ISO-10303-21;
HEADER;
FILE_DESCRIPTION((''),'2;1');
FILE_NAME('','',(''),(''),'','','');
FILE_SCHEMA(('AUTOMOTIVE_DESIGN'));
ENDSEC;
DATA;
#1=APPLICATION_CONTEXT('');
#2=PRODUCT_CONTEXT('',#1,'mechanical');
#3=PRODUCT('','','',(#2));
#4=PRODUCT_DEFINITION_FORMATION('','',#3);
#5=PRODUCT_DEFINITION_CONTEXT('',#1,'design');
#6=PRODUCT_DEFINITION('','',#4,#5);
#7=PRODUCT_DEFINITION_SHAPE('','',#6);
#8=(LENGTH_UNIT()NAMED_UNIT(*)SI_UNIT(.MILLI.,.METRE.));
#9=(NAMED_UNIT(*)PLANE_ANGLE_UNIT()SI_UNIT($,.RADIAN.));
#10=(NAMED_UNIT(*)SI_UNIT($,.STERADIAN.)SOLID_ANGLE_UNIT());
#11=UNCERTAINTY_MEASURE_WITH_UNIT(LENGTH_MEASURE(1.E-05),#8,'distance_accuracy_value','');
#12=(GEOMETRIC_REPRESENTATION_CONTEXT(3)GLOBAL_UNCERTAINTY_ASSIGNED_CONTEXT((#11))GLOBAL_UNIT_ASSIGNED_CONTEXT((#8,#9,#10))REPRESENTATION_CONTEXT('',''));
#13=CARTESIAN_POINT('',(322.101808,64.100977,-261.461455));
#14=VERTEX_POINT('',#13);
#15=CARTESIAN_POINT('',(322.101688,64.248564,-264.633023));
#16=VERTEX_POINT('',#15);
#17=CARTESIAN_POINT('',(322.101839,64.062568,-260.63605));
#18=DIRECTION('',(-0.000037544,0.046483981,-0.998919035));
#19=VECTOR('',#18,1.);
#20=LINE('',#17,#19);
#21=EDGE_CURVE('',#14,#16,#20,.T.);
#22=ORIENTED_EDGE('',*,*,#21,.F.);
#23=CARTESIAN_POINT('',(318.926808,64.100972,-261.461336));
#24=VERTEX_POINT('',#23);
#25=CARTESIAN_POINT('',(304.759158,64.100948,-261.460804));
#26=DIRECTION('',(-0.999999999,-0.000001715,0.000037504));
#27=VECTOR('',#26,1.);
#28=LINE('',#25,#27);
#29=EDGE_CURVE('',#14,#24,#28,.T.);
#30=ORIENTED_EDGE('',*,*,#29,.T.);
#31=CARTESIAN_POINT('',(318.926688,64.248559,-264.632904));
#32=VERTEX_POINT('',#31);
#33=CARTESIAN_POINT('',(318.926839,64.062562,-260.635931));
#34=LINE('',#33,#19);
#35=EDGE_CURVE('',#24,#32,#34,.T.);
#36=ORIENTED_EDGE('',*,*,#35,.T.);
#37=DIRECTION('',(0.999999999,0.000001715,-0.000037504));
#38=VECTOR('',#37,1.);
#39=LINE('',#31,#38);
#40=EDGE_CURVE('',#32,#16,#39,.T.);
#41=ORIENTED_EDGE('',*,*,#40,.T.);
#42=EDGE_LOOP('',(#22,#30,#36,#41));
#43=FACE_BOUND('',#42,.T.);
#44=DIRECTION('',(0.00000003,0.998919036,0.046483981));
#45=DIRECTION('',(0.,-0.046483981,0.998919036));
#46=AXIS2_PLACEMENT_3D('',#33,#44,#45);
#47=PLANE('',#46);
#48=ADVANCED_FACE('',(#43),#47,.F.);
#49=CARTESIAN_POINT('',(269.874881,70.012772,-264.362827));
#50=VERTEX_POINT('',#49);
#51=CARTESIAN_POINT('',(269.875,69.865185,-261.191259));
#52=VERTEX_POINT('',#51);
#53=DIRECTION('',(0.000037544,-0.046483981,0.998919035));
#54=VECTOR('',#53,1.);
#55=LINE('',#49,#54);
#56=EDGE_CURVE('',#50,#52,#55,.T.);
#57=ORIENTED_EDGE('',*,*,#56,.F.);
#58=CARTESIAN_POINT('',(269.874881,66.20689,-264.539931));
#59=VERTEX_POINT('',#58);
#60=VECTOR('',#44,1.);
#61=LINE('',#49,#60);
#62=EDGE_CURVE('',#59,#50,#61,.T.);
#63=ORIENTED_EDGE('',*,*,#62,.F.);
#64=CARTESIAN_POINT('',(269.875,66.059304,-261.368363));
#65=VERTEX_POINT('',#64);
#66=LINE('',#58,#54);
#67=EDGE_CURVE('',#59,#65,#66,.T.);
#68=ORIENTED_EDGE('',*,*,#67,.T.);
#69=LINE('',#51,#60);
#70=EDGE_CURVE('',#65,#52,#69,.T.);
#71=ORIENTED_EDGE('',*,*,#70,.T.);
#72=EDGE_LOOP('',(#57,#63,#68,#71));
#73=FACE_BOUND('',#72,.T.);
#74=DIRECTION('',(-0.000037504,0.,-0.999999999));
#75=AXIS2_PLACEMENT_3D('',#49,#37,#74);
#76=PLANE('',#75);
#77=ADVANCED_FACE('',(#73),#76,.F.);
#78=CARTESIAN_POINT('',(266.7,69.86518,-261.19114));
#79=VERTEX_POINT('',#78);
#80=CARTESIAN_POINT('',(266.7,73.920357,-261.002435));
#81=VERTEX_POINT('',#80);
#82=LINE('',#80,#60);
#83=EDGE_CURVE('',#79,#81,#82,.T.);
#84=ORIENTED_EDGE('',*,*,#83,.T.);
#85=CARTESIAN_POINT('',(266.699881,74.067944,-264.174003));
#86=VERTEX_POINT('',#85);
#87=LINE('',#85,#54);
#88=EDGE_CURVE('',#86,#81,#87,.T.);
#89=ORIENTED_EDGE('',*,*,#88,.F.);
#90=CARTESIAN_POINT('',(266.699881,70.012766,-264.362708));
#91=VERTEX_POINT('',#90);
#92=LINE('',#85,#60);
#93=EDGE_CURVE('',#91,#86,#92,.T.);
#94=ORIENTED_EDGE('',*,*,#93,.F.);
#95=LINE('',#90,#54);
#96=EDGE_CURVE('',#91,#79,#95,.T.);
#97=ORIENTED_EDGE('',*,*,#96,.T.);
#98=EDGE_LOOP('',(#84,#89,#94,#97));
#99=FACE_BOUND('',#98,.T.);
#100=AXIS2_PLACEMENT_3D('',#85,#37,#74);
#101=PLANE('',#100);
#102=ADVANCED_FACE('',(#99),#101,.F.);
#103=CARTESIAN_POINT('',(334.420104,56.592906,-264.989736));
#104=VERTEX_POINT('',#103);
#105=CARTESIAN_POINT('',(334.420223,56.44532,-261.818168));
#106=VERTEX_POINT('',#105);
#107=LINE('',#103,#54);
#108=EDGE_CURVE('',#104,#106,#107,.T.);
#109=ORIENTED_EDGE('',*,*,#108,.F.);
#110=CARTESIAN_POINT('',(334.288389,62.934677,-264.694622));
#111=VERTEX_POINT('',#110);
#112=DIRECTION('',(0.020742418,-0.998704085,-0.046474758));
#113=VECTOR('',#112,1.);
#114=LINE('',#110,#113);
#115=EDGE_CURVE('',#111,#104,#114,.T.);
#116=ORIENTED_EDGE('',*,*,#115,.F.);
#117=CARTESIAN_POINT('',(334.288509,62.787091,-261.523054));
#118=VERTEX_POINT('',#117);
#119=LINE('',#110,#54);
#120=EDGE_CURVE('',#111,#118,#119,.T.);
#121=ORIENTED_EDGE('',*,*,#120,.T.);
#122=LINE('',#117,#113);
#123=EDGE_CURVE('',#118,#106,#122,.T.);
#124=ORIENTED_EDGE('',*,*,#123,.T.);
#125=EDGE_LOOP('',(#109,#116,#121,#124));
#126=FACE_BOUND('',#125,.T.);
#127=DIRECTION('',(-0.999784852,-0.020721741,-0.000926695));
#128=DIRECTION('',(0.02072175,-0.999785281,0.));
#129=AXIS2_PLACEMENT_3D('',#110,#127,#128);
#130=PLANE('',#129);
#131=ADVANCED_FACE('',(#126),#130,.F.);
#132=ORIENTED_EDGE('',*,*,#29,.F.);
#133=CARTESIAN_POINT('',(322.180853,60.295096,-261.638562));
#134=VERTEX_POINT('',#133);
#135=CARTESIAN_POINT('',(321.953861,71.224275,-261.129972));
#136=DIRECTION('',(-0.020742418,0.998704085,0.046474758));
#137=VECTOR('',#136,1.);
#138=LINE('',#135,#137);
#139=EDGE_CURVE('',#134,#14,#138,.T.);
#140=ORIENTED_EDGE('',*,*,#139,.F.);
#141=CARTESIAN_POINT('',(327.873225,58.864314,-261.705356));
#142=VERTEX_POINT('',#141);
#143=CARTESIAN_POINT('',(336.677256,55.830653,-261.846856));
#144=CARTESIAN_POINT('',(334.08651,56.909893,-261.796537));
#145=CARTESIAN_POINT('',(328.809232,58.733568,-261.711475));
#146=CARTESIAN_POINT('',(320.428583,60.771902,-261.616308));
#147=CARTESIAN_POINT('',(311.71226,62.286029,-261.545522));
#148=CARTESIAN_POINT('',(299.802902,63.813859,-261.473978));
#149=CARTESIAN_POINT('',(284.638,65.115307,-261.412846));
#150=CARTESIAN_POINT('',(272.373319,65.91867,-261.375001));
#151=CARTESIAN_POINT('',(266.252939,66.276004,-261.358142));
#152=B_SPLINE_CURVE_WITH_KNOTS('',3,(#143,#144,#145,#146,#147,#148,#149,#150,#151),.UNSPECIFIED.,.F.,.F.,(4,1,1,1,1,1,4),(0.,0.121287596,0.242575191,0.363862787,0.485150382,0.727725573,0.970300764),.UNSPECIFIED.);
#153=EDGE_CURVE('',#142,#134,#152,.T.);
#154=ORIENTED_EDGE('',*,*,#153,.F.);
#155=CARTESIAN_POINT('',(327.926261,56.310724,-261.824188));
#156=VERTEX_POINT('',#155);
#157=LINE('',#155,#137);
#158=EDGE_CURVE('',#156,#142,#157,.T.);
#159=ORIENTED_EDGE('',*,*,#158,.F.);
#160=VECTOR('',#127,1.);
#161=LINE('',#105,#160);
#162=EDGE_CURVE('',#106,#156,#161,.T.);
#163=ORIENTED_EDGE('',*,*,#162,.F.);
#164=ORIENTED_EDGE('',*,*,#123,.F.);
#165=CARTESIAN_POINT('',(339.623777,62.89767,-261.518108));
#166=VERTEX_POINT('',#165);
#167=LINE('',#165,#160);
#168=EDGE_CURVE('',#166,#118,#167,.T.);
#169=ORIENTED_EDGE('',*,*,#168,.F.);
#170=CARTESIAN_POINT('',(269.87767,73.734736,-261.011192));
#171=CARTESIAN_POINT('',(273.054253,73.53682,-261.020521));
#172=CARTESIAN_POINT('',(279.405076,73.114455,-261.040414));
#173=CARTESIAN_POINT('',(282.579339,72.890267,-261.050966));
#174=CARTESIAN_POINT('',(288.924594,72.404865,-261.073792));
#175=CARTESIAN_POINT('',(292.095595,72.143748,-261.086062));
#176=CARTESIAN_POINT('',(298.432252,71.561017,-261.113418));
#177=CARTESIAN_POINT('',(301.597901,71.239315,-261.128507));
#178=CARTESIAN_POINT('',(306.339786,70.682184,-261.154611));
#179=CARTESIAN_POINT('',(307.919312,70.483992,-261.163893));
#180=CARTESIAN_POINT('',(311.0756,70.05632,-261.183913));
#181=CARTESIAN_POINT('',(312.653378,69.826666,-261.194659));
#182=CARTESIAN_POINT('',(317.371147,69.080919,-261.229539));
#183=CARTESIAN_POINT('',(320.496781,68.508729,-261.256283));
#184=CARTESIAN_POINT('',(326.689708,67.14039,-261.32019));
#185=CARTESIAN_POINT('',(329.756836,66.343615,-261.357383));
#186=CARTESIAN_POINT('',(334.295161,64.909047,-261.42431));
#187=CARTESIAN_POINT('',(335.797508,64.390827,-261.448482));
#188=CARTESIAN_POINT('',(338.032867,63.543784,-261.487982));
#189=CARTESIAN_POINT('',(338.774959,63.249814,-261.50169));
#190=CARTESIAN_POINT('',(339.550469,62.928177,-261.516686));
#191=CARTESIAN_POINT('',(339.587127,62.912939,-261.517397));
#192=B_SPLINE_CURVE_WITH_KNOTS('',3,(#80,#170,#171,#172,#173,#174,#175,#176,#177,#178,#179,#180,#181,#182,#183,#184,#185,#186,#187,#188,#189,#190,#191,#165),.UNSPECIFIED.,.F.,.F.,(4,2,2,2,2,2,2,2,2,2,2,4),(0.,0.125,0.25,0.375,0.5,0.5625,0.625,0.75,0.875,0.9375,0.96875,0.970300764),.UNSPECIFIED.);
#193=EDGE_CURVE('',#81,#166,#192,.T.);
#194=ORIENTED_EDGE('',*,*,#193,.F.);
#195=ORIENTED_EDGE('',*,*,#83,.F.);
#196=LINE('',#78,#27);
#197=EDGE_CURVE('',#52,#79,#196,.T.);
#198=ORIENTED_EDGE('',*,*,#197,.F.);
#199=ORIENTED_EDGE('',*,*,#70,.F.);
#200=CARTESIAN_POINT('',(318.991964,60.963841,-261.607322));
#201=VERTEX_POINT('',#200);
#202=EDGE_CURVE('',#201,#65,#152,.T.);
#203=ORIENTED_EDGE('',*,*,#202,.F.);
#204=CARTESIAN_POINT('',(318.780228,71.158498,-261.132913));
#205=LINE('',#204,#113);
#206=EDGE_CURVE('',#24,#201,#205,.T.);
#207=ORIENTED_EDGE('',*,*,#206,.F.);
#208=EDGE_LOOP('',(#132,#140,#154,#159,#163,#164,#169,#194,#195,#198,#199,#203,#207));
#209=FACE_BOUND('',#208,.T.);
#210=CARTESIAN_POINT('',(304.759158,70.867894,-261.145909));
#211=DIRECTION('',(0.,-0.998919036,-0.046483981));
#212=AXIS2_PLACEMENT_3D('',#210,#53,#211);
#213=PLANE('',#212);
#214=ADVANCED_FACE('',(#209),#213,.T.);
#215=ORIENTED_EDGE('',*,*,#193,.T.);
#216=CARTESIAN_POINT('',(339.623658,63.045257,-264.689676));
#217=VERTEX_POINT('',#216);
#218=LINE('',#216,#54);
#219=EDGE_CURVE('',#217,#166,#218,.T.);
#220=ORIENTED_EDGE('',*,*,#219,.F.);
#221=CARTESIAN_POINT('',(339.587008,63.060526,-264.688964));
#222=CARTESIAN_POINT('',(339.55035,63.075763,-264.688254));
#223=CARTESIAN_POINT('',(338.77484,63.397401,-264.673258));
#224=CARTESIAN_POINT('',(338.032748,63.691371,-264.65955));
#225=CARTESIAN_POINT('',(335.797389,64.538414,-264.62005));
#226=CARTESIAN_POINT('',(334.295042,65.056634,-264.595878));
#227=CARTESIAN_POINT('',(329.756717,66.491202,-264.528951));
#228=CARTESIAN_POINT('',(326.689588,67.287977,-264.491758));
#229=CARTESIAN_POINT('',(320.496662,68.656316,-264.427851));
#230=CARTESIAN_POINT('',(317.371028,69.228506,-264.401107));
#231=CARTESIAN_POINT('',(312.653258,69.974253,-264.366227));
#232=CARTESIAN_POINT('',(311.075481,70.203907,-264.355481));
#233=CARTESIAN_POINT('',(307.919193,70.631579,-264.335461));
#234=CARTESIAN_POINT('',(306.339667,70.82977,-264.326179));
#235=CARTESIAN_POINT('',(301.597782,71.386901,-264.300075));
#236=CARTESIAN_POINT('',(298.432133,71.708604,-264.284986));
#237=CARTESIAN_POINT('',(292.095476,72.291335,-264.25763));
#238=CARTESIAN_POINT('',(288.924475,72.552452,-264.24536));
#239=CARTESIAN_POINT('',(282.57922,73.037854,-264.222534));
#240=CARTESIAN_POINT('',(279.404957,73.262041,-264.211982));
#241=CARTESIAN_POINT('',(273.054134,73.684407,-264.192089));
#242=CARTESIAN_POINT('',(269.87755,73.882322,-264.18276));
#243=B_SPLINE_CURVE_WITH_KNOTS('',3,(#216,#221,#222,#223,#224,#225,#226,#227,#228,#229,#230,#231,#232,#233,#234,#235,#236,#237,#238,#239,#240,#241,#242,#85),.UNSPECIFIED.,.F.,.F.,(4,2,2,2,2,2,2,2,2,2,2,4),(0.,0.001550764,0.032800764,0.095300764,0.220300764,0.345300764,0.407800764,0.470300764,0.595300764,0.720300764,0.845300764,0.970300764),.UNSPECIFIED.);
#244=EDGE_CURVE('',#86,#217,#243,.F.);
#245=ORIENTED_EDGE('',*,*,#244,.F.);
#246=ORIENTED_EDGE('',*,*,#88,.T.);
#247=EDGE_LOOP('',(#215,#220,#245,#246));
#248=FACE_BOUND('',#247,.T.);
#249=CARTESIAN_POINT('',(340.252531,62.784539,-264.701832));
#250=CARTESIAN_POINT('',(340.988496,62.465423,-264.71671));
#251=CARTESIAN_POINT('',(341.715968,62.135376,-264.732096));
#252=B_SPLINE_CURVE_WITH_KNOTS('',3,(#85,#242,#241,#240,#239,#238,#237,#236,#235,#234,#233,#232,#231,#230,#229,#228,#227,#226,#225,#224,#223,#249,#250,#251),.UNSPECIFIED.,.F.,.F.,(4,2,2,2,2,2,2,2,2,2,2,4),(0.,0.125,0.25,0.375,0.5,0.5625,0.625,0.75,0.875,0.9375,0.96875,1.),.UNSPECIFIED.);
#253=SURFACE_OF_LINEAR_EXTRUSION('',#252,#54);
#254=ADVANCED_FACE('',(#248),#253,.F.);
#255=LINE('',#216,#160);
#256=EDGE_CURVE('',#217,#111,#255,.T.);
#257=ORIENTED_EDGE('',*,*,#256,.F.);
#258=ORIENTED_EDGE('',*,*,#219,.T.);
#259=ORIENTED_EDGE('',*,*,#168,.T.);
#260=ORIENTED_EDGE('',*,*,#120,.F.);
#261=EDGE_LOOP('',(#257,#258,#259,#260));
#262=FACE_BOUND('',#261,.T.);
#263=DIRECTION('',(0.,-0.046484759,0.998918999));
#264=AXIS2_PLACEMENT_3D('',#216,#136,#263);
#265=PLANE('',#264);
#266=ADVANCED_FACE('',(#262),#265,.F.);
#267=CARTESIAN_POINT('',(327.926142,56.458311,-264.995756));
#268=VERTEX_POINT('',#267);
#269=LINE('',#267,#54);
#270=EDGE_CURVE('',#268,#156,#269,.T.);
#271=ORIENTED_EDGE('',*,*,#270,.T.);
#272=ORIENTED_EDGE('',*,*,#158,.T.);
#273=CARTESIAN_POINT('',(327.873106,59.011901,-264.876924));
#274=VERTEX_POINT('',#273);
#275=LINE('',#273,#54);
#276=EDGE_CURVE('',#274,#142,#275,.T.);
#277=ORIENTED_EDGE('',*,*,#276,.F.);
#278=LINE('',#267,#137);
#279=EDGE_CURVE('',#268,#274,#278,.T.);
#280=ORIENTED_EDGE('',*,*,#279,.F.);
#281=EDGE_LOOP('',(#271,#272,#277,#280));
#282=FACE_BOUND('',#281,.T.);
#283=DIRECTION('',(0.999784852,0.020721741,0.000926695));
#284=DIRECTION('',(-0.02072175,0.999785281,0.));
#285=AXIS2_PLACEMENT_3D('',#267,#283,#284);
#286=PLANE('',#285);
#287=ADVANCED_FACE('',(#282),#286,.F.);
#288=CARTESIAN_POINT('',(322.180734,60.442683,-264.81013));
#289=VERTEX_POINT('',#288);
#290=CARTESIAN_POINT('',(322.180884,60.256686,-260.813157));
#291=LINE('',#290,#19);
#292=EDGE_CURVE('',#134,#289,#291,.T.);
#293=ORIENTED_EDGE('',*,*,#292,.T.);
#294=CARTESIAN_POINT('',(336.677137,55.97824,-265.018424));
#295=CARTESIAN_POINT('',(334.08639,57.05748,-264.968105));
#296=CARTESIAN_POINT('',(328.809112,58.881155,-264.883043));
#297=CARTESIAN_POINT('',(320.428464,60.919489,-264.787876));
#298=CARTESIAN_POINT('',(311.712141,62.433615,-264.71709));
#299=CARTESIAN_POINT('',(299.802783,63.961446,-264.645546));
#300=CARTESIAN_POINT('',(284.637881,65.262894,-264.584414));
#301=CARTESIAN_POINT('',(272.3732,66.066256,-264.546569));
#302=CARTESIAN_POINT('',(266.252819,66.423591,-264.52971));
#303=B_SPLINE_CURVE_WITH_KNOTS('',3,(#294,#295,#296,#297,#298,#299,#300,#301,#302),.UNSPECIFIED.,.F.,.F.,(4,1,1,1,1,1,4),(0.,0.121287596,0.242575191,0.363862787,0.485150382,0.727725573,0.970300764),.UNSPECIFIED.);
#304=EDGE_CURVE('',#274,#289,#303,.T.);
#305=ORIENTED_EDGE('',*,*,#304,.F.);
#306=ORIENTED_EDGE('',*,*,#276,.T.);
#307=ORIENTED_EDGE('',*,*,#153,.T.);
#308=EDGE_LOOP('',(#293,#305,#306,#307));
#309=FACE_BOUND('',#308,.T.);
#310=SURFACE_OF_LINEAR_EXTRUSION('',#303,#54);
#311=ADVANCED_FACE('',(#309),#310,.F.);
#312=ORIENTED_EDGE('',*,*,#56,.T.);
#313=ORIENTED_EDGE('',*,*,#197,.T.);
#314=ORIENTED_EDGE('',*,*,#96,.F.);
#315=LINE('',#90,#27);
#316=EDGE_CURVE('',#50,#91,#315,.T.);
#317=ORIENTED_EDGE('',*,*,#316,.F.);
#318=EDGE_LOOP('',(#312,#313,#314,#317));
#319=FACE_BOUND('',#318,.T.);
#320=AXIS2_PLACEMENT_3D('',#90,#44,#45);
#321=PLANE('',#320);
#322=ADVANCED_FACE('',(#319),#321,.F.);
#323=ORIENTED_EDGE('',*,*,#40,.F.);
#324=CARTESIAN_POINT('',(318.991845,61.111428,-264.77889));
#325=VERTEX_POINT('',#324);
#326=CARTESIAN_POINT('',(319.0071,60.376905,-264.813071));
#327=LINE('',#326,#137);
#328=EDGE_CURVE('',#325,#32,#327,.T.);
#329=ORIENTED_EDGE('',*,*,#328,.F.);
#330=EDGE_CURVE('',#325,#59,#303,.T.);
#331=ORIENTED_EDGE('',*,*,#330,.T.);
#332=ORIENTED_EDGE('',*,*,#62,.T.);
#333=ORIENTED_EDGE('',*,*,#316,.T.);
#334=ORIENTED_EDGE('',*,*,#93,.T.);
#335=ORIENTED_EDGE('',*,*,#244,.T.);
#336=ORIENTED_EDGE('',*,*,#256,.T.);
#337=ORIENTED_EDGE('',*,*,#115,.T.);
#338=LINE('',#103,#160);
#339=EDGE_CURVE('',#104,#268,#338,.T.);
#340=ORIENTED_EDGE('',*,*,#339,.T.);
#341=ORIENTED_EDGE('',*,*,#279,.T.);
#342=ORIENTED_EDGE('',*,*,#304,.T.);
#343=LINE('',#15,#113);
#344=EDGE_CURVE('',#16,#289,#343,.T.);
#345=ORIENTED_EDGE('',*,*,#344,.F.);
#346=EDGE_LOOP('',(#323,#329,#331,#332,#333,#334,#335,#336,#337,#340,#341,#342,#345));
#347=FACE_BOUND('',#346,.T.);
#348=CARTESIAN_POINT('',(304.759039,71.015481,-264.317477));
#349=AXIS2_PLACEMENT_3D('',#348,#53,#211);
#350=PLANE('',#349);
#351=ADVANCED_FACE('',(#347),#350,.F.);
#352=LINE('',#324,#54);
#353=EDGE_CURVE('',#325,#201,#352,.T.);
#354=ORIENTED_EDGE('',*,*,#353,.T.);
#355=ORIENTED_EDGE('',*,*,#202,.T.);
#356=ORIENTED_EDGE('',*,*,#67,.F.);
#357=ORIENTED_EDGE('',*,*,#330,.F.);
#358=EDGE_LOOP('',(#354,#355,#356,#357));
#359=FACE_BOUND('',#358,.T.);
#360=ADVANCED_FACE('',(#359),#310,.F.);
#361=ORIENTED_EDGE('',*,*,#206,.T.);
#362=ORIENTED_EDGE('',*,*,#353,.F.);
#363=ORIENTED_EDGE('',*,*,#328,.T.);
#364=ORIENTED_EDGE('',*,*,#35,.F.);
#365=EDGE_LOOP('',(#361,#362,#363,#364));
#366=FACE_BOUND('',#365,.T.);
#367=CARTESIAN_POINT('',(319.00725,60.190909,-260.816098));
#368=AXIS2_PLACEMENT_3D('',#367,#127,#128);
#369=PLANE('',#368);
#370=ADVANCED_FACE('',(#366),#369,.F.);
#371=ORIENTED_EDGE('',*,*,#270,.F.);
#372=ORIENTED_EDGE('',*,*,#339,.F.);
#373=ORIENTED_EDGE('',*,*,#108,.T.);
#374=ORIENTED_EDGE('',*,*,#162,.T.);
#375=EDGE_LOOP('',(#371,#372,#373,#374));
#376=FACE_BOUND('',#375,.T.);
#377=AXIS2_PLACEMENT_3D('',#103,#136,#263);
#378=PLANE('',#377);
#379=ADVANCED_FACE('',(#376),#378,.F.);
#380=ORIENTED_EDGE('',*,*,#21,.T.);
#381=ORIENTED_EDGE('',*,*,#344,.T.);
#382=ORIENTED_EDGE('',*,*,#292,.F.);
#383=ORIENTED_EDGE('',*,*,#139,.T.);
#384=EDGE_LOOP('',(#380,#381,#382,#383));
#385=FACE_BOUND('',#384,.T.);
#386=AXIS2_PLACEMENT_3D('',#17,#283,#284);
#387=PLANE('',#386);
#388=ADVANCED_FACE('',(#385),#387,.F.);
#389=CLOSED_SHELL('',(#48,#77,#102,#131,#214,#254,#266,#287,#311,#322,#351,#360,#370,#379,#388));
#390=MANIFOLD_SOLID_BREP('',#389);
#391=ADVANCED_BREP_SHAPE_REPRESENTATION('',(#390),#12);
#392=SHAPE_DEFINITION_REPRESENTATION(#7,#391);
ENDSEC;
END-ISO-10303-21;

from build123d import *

# Parameters (mm, degrees)
BOSS_EXTRUDE1_DEPTH = 3.175
CUT_EXTRUDE1_DEPTH  = 346.234988545


# Read off the part's stored shape, not the designer's step: Boss-Extrude1
with BuildPart() as part:
    # Boss-Extrude1 outline → Boss-Extrude1 (new body)
    with BuildSketch(Plane(origin=(-0.009916987, 12.278576214, -263.860866814), x_dir=(-0.9999999992952415, -1.714878770133331e-06, 3.750435023264405e-05), z_dir=(-3.75435237541071e-05, 0.046483980928917014, -0.998919034810872))):
        with BuildLine():
            Line((-266.709915303, 57.648462135), (-266.709915303, 61.708027896))
            add(Edge.make_bspline(
                [(-266.709915303, 61.708027896), (-269.887584881, 61.52219978), (-273.064168518, 61.324064977), (-279.4149918, 60.901231504), (-282.58925463, 60.676795587), (-288.934509574, 60.190857567), (-292.10551029, 59.929452947), (-298.442167613, 59.346080292), (-301.607816437, 59.024024058), (-306.349701907, 58.466282245), (-307.929227861, 58.267873545), (-311.085515829, 57.839733129), (-312.663293034, 57.609828162), (-317.381062315, 56.863266021), (-320.506696952, 56.290451051), (-326.699623135, 54.920620881), (-329.766751467, 54.122978484), (-334.305076589, 52.686850178), (-335.807423356, 52.168067082), (-338.042782442, 51.320103283), (-338.784874555, 51.025814321), (-339.560385157, 50.703827374), (-339.597042887, 50.688573106), (-339.633692836, 50.67328778)],
                knots=[0, 0, 0, 0, 0.125, 0.125, 0.25, 0.25, 0.375, 0.375, 0.5, 0.5, 0.5625, 0.5625, 0.625, 0.625, 0.75, 0.75, 0.875, 0.875, 0.9375, 0.9375, 0.96875, 0.96875, 0.970300764, 0.970300764, 0.970300764, 0.970300764], degree=3))
            Line((-339.633692836, 50.67328778), (-334.298424209, 50.562597429))
            Line((-334.298424209, 50.562597429), (-334.430138757, 44.213963618))
            Line((-334.430138757, 44.213963618), (-327.936177051, 44.079233964))
            Line((-327.936177051, 44.079233964), (-327.883140614, 46.635587248))
            add(Edge.make_bspline(
                [(-327.883140614, 46.635587248), (-325.438031692, 47.326829824), (-320.133269542, 48.598331676), (-311.722176056, 50.061031972), (-299.81281744, 51.590536041), (-285.844187499, 52.790641789), (-274.800669007, 53.536749827), (-269.884915303, 53.838462135)],
                knots=[0.134029376, 0.134029376, 0.134029376, 0.134029376, 0.242575191, 0.363862787, 0.485150382, 0.727725573, 0.92246236, 0.92246236, 0.92246236, 0.92246236], degree=3))
            Line((-269.884915303, 53.838462135), (-269.884915303, 57.648462135))
            Line((-269.884915303, 57.648462135), (-266.709915303, 57.648462135))
        make_face()
    extrude(amount=BOSS_EXTRUDE1_DEPTH)

    # Sketch2 → Cut-Extrude1 (cut, through all)
    with BuildSketch(Plane(origin=(-0.010036187, 12.426162855, -267.03243475), x_dir=(-0.9999999992952414, -1.7148787712879688e-06, 3.750435025948783e-05), z_dir=(-3.7543523780975545e-05, 0.04648398092854075, -0.9989190348108895))):
        Polygon((-322.111723269, 51.877927034), (-322.190769005, 48.067927034), (-319.017135046, 48.002083929), (-318.936723269, 51.877927034), align=None)
    extrude(amount=-CUT_EXTRUDE1_DEPTH, mode=Mode.SUBTRACT)


solid = part.part
